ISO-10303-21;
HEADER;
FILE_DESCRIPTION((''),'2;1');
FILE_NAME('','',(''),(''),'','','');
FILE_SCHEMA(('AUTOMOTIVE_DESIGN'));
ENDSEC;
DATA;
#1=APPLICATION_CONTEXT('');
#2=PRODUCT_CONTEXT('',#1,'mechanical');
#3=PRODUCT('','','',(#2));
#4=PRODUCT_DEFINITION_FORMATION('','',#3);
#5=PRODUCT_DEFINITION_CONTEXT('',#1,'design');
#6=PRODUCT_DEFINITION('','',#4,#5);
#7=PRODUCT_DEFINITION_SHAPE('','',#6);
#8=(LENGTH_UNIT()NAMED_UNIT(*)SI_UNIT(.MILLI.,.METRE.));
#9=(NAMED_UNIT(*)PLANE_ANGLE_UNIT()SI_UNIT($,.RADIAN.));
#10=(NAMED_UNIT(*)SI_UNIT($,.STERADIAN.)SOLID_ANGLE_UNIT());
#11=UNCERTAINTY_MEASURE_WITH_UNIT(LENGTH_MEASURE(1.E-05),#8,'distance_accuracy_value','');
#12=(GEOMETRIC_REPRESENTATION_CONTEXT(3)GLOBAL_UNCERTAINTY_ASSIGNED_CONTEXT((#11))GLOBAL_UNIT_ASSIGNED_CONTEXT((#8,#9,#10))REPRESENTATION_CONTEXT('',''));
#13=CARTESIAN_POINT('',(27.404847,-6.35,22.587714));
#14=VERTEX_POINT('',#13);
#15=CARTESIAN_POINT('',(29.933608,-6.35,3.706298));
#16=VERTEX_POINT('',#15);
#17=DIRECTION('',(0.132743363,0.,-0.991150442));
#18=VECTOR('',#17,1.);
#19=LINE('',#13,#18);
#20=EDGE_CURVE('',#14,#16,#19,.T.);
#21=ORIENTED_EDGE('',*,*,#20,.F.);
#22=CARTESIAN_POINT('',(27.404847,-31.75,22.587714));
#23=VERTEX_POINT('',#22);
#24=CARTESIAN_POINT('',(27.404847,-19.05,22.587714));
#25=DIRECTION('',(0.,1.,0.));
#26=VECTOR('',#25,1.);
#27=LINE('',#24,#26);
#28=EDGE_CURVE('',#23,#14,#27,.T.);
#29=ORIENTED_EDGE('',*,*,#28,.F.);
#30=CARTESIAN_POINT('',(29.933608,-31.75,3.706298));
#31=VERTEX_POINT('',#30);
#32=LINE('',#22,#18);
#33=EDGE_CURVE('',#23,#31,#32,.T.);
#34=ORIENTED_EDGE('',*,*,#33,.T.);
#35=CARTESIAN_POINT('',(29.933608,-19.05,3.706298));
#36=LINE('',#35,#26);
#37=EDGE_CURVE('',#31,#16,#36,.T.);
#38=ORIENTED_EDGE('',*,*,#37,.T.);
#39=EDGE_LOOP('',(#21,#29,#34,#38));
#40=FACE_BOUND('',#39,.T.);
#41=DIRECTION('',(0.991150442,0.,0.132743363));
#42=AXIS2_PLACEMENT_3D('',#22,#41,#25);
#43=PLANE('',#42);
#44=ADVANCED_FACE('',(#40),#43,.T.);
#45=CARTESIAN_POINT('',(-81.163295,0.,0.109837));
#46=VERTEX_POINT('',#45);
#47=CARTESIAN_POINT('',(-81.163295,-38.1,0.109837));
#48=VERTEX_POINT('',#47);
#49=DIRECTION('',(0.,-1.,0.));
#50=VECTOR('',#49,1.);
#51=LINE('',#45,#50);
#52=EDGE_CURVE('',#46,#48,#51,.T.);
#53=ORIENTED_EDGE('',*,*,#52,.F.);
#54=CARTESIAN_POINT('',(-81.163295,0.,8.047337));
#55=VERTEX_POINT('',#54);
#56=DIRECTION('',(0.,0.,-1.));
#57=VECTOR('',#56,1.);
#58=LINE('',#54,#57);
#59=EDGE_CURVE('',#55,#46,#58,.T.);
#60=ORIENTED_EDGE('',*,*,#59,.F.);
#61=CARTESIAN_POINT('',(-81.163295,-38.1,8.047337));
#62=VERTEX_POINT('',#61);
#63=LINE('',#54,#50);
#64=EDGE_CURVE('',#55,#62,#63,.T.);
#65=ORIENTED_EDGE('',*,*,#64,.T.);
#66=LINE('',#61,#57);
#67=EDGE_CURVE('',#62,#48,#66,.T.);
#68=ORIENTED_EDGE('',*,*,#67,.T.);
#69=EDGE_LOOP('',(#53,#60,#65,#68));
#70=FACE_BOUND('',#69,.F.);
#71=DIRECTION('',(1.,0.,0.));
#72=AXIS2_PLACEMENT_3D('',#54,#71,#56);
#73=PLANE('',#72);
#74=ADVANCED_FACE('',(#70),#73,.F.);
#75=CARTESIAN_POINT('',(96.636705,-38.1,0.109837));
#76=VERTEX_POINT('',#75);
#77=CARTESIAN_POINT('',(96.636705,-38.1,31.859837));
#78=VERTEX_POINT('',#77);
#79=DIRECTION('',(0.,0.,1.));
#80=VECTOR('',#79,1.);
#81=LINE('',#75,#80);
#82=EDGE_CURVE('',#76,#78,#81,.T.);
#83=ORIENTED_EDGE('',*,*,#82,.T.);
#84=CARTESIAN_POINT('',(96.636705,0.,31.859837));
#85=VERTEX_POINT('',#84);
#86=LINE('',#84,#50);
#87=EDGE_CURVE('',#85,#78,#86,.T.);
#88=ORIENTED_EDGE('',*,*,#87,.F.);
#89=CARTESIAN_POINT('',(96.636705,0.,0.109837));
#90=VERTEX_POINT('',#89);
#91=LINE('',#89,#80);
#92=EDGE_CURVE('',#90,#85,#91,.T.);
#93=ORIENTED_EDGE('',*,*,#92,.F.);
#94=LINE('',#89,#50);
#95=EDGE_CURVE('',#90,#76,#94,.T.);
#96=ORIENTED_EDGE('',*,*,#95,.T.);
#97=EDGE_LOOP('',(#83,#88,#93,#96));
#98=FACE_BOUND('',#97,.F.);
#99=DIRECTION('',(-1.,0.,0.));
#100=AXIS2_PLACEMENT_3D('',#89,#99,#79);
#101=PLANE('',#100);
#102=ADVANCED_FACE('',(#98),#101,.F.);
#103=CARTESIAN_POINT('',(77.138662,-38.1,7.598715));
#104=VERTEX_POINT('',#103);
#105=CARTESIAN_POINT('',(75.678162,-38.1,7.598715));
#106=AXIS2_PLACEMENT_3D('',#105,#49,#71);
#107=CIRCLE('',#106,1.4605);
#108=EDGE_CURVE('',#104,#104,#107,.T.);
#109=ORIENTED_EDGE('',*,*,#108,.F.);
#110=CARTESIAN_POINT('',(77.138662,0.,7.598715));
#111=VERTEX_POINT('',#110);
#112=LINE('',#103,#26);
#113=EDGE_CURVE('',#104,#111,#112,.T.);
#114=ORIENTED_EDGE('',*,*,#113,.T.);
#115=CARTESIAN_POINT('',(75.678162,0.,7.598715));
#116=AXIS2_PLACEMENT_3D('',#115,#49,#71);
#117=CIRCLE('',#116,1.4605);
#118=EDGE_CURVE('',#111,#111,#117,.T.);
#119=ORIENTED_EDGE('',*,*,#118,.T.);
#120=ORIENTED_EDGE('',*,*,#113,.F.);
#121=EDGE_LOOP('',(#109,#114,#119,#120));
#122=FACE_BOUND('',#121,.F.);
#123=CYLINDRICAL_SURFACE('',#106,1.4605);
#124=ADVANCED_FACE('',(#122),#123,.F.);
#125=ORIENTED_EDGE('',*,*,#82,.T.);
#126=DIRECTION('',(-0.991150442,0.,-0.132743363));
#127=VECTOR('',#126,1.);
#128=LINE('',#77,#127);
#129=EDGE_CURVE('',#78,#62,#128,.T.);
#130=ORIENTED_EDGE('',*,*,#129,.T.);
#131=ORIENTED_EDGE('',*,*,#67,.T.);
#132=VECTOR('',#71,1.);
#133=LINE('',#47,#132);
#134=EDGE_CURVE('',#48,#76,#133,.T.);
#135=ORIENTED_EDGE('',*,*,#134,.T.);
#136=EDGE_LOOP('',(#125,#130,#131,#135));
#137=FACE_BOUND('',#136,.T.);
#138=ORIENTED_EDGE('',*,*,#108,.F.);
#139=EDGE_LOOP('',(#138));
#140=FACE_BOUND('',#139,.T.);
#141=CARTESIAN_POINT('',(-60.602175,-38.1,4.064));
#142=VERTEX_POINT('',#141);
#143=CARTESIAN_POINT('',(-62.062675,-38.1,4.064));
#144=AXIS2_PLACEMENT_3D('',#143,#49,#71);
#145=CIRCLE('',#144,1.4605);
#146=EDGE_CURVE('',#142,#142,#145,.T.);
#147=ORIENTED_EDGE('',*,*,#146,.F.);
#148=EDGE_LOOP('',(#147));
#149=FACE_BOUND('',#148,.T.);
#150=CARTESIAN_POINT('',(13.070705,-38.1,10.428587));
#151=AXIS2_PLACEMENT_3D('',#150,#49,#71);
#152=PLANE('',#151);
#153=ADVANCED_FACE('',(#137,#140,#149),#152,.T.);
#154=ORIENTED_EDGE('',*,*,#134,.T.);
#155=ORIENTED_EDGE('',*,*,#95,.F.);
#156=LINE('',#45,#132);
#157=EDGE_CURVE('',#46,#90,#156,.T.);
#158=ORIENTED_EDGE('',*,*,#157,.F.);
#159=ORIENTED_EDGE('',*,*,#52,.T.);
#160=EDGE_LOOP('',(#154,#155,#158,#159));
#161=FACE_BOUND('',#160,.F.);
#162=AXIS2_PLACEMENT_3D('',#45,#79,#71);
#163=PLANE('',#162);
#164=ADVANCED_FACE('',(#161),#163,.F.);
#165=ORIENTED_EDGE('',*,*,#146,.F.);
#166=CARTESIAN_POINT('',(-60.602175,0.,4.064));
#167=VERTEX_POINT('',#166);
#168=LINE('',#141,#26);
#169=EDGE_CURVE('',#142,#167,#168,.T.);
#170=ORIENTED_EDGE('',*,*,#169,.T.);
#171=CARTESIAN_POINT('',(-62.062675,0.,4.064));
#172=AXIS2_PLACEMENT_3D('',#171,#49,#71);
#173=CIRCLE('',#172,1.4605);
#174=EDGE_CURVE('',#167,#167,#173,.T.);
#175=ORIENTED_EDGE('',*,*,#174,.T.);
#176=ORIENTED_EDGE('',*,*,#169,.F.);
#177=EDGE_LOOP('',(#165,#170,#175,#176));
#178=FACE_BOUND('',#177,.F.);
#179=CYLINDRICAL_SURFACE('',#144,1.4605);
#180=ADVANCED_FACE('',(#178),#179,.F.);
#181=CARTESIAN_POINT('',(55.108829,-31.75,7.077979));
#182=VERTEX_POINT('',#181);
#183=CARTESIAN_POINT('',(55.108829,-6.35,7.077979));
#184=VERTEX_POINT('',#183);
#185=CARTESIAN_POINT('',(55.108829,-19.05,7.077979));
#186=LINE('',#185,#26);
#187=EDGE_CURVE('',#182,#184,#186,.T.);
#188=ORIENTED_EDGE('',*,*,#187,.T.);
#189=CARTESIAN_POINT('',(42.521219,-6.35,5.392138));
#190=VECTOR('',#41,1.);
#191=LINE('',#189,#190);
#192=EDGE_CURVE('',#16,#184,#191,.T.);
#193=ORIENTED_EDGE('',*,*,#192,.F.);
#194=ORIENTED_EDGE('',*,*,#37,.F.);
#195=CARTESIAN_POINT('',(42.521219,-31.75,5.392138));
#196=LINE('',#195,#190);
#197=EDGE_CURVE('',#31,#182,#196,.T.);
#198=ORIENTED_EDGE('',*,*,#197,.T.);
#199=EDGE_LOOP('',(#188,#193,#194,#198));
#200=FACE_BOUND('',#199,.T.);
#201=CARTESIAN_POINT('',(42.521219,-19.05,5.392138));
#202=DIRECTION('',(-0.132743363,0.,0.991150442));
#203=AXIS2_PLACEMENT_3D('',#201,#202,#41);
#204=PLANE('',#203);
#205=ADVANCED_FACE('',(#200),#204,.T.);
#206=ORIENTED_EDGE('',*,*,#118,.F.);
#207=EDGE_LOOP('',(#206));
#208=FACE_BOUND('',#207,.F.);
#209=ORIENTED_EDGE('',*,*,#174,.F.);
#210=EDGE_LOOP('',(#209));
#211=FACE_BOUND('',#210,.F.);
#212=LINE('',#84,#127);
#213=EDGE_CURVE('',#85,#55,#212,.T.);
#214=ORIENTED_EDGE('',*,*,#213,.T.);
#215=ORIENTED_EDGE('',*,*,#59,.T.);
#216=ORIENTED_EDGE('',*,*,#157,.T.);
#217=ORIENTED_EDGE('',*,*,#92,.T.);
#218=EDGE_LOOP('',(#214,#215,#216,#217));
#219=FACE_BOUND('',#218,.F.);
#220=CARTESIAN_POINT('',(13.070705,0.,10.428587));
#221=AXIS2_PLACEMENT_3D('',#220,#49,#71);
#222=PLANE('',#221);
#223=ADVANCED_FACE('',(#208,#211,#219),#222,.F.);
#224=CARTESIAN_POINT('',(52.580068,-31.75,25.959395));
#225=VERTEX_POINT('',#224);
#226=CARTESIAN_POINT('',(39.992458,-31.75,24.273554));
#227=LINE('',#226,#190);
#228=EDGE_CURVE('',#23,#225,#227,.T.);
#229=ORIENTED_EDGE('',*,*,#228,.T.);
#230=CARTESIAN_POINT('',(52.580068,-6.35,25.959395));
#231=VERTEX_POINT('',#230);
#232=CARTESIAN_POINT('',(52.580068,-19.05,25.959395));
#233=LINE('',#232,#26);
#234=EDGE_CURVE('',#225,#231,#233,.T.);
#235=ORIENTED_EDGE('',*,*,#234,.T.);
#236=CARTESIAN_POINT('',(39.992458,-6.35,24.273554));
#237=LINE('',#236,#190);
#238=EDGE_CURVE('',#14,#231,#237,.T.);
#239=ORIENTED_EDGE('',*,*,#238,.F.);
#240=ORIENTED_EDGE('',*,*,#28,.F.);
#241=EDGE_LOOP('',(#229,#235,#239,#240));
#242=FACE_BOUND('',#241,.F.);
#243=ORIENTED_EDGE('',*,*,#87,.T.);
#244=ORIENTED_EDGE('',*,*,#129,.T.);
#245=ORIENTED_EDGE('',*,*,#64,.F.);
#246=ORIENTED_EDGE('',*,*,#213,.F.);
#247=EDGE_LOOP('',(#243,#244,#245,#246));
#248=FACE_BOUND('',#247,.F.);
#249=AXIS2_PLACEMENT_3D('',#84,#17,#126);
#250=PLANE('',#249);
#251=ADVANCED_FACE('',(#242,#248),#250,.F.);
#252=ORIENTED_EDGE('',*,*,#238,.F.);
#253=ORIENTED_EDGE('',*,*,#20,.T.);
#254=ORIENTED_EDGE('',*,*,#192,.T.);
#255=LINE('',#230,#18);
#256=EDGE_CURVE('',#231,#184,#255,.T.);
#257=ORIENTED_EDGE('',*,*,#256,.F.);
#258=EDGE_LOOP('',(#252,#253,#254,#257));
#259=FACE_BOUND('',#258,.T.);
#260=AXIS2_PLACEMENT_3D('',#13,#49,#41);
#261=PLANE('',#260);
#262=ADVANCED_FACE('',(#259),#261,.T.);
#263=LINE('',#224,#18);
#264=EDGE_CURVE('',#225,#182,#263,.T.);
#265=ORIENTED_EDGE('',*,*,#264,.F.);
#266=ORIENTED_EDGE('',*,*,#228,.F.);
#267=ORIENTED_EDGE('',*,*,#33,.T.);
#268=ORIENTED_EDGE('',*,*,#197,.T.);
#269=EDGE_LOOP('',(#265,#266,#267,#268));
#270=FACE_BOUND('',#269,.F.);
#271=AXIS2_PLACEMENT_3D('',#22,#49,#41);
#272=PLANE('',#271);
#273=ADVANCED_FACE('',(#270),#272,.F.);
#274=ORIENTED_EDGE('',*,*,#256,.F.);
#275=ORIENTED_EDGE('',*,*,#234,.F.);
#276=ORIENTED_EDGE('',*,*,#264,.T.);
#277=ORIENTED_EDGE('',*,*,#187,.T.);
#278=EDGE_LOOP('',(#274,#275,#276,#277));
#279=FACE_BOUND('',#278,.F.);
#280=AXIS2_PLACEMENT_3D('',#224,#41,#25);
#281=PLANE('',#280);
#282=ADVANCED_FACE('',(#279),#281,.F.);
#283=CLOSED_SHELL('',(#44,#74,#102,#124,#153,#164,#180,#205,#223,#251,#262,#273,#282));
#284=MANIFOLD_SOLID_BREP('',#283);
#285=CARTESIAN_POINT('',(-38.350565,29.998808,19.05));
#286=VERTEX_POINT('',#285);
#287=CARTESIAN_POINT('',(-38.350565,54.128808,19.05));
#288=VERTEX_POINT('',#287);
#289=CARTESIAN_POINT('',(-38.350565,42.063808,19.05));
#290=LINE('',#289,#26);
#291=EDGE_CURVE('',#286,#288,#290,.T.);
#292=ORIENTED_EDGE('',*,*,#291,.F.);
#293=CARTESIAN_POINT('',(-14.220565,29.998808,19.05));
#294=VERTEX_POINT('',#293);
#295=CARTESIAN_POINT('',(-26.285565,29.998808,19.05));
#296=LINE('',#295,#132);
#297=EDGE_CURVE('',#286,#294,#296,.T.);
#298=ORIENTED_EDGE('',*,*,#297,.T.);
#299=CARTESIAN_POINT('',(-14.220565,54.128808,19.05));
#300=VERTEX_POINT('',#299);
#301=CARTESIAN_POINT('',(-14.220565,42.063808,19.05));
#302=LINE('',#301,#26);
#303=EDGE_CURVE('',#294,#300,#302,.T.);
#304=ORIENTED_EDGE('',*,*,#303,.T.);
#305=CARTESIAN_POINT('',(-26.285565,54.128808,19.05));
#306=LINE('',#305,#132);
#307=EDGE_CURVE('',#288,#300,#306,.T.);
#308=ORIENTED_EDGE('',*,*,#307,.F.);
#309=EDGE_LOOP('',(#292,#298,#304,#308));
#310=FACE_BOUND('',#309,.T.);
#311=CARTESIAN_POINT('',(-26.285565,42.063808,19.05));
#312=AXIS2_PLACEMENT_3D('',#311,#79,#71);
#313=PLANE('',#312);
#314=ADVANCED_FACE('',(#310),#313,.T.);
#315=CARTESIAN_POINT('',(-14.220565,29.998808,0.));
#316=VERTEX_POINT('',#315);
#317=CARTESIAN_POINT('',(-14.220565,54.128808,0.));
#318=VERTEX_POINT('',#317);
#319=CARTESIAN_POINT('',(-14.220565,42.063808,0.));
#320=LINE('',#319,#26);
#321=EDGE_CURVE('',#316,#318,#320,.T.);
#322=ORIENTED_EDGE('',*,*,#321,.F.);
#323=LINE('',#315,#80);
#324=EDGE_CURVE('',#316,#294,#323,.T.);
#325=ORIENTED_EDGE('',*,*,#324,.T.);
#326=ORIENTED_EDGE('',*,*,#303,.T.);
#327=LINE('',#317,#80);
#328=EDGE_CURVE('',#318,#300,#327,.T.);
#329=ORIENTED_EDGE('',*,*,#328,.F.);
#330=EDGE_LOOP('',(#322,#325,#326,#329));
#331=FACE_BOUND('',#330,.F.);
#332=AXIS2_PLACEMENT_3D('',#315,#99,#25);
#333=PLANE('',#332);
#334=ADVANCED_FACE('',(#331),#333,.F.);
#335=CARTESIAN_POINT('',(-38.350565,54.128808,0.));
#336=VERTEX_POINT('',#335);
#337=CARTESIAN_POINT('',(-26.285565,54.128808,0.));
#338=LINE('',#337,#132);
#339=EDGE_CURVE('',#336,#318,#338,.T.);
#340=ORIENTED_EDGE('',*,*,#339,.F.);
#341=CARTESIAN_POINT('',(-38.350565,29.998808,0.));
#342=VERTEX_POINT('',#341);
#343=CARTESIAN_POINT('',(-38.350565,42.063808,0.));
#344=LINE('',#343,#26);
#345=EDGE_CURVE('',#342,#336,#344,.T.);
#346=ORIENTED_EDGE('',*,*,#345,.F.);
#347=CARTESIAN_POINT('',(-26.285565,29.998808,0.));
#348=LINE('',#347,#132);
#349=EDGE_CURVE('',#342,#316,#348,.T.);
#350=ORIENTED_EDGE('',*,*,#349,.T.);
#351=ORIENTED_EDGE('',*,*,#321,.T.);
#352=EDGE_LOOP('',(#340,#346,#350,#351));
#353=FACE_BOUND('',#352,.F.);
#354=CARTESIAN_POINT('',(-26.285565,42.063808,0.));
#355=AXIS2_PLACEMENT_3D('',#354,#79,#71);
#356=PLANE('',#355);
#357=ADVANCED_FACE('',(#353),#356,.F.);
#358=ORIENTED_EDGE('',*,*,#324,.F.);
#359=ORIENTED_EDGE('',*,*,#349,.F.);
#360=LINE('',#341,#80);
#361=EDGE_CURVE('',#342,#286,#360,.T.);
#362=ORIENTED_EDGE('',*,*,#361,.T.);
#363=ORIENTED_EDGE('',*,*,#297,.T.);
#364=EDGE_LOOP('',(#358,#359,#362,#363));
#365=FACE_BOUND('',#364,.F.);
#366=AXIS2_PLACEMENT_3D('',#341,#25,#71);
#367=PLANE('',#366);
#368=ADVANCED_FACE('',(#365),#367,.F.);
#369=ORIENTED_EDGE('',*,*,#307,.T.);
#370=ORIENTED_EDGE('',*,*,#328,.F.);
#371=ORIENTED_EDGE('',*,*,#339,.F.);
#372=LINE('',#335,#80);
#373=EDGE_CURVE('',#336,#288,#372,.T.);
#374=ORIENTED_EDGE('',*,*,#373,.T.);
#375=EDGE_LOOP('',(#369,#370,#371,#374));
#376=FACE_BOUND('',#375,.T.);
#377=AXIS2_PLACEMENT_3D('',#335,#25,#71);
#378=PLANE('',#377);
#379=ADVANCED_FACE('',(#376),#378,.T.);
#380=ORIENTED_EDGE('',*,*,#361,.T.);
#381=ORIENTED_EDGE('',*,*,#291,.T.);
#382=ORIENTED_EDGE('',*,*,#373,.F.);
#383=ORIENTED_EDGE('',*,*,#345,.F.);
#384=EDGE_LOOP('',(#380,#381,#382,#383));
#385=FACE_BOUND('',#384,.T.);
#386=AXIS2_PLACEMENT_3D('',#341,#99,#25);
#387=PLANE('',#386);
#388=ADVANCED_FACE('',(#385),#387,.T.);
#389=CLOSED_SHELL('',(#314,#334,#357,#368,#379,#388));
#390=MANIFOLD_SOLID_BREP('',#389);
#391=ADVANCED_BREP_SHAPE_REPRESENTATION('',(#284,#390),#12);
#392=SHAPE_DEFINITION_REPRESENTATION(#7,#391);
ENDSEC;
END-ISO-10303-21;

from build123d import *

# Parameters (mm, degrees)
F1_DEPTH  = 38.1
F2_W      = 25.4
F2_H      = 25.4
F4_DEPTH  = 19.05
F6_R      = 1.4605
F7_DEPTH  = 38.1
F9_R      = 1.4605
F10_DEPTH = 38.1
F12_W     = 24.13
F12_H     = 24.13
F13_DEPTH = 19.05


# Not quite as in the source:
# - a feature of the source that left no trace in its solid (it failed there, or was rolled back) is left out


with BuildPart() as f1:
    # F0 (on Front) → F1 (new body)
    with BuildSketch(Plane.XZ):
        Polygon((96.6367053866, 0.1098374724), (96.6367053866, 31.8598374724), (-81.1632946134, 8.0473374724), (-81.1632946134, 0.1098374724), align=None)
    extrude(amount=F1_DEPTH)

    # F2 (on face) → F4 (cut)
    with BuildSketch(Plane(origin=(-2.4889394817, 0, 18.5840814633), x_dir=(0.9911504425, 0, 0.1327433628), z_dir=(-0.1327433628, 0, 0.9911504425))):
        with Locations((42.8606952689, -19.05)):
            Rectangle(F2_W, F2_H)
    extrude(amount=-F4_DEPTH, mode=Mode.SUBTRACT)

    # F6 (on face) → F7 (cut)
    with BuildSketch(Plane.XZ.offset(38.1)):
        with Locations((-62.0626753688, 4.064)):
            Circle(F6_R)
    extrude(amount=-F7_DEPTH, mode=Mode.SUBTRACT)

    # F9 (on face) → F10 (cut)
    with BuildSketch(Plane.XZ.offset(38.1)):
        with Locations((75.6781622767, 7.5987153687)):
            Circle(F9_R)
    extrude(amount=-F10_DEPTH, mode=Mode.SUBTRACT)


with BuildPart() as f13:
    # F12 (on Top) → F13 (new body)
    with BuildSketch(Plane.XY):
        with Locations((-26.2855645269, 42.0638084072)):
            Rectangle(F12_W, F12_H)
    extrude(amount=F13_DEPTH)


solid = Compound([f1.part, f13.part])
